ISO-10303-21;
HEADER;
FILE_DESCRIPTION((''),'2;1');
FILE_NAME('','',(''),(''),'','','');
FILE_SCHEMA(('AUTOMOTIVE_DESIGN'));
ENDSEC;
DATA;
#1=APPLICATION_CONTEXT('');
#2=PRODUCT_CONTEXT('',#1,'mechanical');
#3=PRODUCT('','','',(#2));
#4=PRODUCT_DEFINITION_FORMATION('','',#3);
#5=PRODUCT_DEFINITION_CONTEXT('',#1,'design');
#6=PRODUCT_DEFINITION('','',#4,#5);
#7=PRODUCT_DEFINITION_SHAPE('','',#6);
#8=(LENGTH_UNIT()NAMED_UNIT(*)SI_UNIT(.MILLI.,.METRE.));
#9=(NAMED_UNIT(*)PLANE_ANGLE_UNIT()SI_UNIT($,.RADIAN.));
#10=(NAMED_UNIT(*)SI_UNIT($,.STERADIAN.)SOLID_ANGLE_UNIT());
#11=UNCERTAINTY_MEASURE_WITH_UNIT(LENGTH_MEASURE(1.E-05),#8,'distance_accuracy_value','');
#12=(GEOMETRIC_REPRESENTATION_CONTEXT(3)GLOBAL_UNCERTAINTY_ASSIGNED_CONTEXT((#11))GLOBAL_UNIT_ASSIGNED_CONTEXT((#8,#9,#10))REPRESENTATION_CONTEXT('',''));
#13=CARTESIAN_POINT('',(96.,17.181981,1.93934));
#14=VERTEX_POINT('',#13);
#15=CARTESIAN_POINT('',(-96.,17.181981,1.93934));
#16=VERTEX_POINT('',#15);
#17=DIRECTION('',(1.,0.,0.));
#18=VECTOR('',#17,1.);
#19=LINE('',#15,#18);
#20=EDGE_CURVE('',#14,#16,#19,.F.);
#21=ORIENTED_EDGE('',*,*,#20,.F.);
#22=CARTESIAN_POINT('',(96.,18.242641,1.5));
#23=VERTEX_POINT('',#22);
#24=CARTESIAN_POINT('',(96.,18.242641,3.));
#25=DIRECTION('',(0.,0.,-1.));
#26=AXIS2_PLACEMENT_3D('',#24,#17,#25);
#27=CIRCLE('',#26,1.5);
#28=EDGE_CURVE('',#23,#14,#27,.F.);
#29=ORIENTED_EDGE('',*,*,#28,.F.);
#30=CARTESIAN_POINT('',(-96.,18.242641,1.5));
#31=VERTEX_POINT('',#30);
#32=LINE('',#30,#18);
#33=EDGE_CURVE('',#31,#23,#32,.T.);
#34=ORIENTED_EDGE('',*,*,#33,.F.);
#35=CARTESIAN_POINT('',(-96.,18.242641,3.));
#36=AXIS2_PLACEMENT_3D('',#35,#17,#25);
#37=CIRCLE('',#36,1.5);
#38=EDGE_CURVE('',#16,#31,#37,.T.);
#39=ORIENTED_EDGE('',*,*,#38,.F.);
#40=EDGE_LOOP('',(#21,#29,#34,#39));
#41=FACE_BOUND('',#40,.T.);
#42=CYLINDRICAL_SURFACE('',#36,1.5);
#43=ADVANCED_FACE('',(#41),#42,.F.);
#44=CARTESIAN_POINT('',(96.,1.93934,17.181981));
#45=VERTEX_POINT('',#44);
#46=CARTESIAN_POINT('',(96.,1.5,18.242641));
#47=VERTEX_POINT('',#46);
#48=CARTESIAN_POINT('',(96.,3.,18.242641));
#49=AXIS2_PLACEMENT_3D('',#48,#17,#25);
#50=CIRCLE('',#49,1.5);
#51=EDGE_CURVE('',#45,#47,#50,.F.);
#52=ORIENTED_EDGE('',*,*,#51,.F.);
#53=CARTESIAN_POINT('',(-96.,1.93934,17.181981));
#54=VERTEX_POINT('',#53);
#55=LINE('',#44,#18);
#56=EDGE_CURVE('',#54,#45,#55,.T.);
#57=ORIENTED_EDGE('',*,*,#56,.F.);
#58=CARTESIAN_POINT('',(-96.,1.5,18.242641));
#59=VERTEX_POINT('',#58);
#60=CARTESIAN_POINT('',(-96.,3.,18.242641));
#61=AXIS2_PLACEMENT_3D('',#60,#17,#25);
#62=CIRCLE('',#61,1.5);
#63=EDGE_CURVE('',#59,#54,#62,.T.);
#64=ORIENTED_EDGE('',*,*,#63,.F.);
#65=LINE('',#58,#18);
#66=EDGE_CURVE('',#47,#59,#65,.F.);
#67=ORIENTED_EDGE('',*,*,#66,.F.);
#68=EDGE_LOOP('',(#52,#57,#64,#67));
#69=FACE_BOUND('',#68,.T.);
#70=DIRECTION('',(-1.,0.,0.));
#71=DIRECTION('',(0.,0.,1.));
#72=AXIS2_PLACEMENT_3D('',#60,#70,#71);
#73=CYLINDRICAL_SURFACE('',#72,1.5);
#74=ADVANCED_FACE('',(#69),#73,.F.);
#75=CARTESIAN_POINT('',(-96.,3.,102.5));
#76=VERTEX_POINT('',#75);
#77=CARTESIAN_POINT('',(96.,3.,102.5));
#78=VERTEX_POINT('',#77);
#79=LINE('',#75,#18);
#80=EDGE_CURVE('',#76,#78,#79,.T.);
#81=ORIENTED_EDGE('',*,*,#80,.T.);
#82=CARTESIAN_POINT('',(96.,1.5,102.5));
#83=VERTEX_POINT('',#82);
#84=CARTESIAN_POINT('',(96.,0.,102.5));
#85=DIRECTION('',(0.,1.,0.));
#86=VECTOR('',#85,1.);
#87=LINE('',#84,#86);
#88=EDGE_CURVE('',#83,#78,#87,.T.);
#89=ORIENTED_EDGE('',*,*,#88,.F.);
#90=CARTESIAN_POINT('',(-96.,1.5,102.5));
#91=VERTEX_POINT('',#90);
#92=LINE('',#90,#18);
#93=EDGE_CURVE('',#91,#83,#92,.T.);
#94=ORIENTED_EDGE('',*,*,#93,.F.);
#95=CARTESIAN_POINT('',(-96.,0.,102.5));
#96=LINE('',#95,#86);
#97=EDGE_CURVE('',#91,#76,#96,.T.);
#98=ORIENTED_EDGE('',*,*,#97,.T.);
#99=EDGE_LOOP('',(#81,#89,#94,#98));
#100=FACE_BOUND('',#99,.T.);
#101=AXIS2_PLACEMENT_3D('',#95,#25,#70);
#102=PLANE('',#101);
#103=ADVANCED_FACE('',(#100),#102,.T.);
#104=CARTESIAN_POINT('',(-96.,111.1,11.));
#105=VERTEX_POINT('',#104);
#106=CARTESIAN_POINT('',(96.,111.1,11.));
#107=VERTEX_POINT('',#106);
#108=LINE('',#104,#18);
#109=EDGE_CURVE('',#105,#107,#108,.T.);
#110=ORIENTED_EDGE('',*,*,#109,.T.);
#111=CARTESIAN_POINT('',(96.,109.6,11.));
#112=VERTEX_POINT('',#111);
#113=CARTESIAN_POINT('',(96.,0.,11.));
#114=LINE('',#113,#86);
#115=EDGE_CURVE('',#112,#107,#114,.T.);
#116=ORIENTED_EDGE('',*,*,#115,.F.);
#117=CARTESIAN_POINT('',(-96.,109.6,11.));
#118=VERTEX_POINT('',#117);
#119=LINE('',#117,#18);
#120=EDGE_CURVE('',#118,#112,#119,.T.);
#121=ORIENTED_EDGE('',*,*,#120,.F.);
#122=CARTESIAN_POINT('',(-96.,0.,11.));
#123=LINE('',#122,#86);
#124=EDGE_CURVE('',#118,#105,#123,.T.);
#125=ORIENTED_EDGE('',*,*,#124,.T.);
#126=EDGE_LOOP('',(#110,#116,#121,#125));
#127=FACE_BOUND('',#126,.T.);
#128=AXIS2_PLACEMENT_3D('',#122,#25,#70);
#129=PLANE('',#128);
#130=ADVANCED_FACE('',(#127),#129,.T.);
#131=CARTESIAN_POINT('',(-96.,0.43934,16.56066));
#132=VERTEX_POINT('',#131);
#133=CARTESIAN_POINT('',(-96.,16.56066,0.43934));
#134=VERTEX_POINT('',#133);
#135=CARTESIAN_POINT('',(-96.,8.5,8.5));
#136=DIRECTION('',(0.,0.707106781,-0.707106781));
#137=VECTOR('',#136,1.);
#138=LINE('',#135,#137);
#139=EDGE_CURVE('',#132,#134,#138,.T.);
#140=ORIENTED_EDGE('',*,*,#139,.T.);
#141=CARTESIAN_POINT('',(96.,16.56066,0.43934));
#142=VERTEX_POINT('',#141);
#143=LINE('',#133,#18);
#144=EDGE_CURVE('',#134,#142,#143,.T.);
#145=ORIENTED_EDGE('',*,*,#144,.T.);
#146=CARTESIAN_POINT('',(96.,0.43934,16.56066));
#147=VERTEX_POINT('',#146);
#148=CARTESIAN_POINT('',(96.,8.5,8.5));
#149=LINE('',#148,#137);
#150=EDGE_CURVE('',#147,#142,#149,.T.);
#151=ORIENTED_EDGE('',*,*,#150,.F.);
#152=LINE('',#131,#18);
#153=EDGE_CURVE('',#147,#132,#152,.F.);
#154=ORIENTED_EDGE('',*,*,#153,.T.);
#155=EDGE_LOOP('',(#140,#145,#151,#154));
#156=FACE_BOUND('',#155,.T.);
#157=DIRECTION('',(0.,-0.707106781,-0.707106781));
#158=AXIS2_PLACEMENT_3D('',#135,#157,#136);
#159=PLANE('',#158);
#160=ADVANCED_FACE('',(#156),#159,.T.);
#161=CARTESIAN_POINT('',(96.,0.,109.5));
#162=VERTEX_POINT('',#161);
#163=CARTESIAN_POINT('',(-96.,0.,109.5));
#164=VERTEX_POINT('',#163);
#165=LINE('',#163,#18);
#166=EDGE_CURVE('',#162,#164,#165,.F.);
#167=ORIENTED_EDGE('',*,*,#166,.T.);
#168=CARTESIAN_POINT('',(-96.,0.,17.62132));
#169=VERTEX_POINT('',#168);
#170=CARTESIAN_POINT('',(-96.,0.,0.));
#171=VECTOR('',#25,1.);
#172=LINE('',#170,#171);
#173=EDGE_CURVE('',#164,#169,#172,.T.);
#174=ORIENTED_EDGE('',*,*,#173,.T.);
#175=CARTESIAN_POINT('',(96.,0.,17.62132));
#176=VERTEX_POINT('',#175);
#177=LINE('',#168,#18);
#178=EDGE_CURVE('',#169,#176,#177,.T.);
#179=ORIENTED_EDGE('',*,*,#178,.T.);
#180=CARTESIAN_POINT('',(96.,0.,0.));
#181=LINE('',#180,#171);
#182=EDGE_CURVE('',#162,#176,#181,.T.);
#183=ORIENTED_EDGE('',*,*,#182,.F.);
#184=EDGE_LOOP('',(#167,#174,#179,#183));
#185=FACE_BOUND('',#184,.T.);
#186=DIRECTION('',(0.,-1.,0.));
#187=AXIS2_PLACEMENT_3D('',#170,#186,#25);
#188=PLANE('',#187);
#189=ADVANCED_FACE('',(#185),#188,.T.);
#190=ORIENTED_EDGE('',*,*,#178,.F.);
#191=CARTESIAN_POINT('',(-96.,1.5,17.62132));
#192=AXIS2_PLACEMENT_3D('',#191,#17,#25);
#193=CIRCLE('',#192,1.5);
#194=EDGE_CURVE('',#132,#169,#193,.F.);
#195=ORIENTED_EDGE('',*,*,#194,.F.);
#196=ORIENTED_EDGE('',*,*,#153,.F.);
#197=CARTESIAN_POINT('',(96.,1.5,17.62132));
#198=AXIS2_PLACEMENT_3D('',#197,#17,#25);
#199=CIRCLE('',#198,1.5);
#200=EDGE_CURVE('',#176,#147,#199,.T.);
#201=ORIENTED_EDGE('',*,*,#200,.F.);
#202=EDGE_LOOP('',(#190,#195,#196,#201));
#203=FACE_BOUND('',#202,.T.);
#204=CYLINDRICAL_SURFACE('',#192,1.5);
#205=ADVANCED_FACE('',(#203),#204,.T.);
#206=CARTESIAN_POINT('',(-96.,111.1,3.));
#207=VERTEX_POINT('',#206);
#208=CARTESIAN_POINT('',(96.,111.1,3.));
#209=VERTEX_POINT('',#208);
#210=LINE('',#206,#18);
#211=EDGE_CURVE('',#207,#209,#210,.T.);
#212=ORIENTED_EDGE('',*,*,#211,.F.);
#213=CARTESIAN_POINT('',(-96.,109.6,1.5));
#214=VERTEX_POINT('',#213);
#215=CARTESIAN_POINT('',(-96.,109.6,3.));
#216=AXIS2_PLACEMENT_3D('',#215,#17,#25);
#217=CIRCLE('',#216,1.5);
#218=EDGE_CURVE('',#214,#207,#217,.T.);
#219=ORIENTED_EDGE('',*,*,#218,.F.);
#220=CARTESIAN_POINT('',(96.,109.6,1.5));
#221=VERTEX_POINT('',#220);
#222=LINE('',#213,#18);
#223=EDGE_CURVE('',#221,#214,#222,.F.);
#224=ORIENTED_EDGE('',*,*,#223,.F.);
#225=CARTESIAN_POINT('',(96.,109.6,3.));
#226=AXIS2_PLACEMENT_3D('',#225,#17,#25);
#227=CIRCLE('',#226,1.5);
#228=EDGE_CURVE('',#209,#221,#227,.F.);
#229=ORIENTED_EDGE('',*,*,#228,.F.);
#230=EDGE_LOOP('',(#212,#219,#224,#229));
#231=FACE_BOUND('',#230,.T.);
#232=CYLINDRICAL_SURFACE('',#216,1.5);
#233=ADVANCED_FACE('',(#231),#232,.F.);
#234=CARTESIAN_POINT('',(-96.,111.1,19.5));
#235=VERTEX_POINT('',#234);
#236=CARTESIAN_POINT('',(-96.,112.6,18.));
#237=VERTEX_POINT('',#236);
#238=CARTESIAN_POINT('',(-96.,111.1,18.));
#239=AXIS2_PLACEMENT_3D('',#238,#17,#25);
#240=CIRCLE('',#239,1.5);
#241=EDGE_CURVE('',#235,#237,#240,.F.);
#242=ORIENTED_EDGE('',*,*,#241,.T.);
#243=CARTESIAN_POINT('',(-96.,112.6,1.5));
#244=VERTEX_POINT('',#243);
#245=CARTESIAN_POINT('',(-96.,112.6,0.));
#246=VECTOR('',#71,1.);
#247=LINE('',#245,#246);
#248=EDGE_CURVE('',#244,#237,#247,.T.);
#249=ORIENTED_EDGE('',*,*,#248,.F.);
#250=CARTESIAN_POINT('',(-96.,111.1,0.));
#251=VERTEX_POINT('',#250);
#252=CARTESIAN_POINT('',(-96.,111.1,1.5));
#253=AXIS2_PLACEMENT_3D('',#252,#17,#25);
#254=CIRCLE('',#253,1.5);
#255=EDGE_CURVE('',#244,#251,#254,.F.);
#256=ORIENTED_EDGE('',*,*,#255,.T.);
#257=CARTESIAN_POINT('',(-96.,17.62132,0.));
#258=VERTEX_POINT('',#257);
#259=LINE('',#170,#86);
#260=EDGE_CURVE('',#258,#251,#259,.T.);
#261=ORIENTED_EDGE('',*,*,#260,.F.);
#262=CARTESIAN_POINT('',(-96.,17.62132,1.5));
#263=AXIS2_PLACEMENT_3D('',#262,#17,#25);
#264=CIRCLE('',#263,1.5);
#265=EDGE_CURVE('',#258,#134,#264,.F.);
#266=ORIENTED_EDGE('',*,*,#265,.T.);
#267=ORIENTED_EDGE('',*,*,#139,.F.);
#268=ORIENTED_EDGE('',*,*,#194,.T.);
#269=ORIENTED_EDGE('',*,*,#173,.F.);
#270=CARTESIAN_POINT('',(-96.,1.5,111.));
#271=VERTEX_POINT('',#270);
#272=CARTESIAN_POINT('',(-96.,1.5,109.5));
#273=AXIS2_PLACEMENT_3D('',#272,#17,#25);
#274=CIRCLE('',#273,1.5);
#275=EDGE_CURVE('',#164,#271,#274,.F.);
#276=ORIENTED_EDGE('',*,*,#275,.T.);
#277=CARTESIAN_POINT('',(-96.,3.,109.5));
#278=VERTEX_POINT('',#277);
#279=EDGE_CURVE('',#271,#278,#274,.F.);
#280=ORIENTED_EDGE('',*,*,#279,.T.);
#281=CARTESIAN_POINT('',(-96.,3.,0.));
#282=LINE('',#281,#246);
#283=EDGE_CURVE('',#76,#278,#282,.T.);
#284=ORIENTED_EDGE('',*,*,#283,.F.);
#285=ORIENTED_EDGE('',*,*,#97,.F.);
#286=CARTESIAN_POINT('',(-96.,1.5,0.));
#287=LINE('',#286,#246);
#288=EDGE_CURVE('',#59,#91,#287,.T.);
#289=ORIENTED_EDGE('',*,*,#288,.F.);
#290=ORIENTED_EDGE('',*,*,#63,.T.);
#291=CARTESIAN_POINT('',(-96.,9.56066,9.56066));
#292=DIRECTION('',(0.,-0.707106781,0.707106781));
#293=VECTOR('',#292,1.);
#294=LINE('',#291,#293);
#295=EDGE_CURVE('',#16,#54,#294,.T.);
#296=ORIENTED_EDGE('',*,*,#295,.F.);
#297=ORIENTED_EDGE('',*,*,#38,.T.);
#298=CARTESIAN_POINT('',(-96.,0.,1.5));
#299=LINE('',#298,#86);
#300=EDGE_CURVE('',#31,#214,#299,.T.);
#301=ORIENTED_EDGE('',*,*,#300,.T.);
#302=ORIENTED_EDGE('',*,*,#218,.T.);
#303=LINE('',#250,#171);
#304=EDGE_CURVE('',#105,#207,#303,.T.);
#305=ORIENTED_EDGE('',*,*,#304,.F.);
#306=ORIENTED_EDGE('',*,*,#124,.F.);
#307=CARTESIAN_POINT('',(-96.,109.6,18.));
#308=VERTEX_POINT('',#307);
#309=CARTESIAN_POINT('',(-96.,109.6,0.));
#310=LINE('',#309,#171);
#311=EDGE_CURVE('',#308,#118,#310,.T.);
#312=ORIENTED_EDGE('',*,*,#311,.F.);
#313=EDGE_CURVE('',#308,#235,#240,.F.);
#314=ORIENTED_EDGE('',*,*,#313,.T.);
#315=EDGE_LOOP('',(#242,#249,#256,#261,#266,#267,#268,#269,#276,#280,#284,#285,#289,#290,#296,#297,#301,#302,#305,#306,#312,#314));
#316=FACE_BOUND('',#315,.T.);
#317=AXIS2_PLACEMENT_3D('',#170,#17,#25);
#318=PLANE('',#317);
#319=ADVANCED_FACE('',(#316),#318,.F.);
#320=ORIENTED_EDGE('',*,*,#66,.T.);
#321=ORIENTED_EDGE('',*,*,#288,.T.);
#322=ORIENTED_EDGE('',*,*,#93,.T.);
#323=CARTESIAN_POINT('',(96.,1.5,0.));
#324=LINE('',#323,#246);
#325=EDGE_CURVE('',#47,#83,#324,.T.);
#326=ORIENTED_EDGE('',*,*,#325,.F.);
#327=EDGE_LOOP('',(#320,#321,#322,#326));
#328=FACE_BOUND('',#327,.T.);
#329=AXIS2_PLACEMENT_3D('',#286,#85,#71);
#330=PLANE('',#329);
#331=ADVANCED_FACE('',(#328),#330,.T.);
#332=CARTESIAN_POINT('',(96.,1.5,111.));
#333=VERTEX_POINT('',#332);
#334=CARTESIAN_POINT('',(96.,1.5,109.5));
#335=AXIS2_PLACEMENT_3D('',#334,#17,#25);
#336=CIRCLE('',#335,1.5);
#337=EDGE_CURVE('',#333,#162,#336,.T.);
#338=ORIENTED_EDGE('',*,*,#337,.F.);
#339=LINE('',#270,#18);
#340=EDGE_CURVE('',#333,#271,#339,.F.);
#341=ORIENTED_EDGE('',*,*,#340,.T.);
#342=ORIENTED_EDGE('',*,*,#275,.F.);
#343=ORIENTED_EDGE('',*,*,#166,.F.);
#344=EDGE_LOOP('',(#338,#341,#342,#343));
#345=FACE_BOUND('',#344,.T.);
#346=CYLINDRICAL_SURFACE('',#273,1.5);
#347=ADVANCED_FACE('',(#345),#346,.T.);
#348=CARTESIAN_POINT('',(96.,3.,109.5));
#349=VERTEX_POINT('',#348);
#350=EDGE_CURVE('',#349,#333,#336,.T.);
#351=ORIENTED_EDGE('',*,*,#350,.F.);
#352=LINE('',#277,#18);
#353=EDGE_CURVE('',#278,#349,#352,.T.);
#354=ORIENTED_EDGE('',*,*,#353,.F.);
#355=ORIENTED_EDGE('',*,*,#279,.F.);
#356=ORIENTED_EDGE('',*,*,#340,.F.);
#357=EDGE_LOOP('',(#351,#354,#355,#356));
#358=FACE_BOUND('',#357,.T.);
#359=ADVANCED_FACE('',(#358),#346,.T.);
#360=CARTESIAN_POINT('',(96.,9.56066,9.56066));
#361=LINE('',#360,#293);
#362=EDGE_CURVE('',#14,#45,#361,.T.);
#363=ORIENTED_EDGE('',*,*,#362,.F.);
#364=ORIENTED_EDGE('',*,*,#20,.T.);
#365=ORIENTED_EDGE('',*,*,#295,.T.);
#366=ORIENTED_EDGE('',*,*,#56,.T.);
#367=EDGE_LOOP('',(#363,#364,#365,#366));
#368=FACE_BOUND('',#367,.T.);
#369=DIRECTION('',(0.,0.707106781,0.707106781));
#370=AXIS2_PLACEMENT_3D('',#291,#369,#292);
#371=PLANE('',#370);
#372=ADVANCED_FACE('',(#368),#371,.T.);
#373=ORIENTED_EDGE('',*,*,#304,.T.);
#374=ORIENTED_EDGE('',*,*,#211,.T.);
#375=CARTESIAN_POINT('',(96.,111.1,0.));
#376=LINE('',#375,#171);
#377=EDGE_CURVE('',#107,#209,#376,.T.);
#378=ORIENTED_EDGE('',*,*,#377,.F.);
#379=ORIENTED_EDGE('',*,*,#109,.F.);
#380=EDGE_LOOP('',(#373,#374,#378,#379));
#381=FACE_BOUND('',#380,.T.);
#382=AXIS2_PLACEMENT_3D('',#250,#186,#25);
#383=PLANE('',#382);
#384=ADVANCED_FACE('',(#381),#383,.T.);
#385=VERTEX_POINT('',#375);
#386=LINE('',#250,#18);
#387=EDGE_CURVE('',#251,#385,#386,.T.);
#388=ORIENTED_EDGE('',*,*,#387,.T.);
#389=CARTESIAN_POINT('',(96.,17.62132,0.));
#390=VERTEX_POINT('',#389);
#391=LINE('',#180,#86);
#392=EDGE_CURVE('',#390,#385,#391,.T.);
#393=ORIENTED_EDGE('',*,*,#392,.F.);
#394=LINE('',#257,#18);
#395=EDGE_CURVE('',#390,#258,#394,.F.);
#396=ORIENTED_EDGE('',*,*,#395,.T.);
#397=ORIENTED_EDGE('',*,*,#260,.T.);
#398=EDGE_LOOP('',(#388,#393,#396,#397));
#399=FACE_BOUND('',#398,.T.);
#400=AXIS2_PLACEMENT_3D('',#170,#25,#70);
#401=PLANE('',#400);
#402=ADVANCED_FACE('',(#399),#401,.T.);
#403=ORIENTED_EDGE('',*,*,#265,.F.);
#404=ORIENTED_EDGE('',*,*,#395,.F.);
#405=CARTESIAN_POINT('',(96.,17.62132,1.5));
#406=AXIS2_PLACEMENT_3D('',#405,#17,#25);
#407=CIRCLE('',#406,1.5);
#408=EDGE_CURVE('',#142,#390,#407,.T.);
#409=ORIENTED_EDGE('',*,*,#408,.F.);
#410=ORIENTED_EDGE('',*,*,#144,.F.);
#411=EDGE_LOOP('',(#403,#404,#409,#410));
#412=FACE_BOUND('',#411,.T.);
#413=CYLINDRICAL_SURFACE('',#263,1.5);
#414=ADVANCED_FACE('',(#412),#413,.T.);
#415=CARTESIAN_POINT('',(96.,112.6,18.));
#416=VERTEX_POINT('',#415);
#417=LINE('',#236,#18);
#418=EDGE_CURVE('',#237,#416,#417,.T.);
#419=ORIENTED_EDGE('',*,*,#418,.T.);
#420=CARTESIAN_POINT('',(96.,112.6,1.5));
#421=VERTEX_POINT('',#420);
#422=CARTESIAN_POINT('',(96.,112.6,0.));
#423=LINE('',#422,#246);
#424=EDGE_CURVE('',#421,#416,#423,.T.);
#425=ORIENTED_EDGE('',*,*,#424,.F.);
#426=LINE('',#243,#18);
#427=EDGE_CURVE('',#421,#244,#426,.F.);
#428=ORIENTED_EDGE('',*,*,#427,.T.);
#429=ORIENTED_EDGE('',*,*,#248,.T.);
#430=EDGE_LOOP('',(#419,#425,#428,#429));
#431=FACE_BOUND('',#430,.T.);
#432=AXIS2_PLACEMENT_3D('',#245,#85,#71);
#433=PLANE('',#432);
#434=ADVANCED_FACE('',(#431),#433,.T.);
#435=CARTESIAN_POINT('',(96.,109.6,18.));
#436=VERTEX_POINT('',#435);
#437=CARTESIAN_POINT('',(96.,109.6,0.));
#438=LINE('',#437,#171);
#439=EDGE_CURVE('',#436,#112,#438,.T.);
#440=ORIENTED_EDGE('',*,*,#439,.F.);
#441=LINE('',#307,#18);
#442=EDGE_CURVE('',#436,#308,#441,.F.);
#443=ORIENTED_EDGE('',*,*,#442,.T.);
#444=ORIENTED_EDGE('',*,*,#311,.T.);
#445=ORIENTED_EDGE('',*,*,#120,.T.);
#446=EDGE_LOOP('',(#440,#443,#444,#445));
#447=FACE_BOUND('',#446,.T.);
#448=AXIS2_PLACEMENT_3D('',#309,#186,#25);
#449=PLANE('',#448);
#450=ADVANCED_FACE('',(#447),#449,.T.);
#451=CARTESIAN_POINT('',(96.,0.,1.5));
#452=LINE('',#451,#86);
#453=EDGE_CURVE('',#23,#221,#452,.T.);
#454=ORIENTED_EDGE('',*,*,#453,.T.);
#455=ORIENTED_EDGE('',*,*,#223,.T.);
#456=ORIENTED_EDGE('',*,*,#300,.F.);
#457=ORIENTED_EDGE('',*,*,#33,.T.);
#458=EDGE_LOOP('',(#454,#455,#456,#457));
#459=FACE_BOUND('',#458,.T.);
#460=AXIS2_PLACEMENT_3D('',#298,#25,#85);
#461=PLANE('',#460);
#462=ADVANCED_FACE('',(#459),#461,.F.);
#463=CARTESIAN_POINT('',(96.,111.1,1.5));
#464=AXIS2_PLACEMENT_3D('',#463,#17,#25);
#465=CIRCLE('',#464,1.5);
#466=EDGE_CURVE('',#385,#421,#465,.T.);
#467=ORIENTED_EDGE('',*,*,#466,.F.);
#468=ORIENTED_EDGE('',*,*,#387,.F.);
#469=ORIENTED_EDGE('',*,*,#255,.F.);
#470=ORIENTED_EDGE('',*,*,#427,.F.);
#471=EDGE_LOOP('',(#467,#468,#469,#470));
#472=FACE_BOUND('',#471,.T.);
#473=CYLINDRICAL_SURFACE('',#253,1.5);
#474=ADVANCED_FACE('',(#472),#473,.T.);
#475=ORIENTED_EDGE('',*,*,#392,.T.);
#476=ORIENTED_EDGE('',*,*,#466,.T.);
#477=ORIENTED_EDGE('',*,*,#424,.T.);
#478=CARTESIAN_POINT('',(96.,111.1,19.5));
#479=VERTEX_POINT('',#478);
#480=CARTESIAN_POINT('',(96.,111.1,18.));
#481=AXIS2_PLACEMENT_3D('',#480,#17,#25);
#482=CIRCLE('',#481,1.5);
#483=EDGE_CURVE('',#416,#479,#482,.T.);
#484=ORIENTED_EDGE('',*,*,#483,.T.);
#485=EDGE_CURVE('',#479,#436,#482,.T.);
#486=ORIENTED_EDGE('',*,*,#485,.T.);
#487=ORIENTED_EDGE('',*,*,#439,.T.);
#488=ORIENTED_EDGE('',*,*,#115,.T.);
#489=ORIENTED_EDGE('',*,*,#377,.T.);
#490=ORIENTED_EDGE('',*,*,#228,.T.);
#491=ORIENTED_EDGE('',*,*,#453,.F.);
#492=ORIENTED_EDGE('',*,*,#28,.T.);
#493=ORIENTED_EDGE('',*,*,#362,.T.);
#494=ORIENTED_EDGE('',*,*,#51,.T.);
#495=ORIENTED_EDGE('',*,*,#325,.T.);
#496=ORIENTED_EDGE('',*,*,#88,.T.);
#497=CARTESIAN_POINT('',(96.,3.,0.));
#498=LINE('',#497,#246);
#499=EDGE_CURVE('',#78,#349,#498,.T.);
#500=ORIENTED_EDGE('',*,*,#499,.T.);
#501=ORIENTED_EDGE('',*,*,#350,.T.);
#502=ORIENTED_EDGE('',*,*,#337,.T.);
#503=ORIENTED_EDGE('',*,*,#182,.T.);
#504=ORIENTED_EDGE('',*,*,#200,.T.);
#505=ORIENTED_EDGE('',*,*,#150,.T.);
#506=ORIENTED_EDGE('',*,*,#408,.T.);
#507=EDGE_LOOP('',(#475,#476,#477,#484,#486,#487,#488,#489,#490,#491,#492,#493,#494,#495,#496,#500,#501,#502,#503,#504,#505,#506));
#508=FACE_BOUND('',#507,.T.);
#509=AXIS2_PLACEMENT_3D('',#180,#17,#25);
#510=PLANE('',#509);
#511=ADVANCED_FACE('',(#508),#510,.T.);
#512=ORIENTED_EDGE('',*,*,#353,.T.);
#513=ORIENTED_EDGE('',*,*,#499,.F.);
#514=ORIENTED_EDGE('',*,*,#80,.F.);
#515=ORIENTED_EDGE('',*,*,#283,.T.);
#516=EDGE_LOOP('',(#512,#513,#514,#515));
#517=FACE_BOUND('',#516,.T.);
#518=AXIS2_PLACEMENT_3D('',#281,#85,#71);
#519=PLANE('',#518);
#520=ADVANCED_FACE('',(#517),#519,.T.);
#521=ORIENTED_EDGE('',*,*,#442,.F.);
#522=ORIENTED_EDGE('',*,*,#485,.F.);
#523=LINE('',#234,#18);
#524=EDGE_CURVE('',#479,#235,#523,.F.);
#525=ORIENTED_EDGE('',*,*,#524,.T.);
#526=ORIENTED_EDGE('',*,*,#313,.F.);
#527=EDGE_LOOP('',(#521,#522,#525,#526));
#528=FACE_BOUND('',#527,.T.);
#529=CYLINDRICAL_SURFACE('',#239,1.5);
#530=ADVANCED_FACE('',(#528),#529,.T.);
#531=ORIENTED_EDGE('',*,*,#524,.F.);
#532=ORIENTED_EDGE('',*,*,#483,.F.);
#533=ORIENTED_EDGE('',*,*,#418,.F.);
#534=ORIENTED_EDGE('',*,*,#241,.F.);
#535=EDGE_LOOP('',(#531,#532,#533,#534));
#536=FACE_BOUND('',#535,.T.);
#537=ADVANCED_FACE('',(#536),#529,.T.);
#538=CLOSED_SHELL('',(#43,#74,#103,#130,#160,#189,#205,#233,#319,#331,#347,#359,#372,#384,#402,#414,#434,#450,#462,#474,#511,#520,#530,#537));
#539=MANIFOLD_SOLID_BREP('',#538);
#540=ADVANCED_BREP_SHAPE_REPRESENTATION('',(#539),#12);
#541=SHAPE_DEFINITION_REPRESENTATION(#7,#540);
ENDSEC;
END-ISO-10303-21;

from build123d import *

# Parameters (mm, degrees)
EXTRUDE_1_DEPTH      = 96
EXTRUDE_1_DEPTH_BACK = 96
SKETCH_1_W           = 1.5
SKETCH_1_H           = 8.5
FILLET_1_R           = 1.5


with BuildPart() as part:
    # 草圖1 → 擠出1 (new, two sides: drawn at the far end of the back side and taken through both)
    with BuildSketch(Plane.YZ.offset(-EXTRUDE_1_DEPTH_BACK)):
        Polygon((1.5, 17), (1.5, 17.621320344), (0, 17), align=None)
        Polygon((17.621320344, 1.5), (17, 1.5), (17, 0), align=None)
        with Locations((2.25, 106.75)):
            Rectangle(SKETCH_1_W, SKETCH_1_H)
        with Locations((110.35, 15.25)):
            Rectangle(SKETCH_1_W, SKETCH_1_H)
        Polygon((111.1, 11), (111.1, 1.5), (112.6, 1.5), (112.6, 19.5), (111.1, 19.5), align=None)
        Polygon((17.621320344, 1.5), (17, 1.5), (17, 0), (0, 17), (1.5, 17), (1.5, 17.621320344), align=None)
        Polygon((0, 111), (0, 17), (1.5, 17.621320344), (1.5, 102.5), (1.5, 111), align=None)
        Polygon((17.621320344, 1.5), (17, 0), (112.6, 0), (112.6, 1.5), (111.1, 1.5), align=None)
    extrude(amount=EXTRUDE_1_DEPTH + EXTRUDE_1_DEPTH_BACK)

    # 圓角1
    fillet_1_edges = [part.edges().sort_by_distance(p)[0] for p in [
        (0, 0, 111),
        (0, 3, 111),
        (0, 1.5, 17.621320344),
        (0, 17, 0),
        (0, 0, 17),
        (0, 17.621320344, 1.5),
        (0, 111.1, 1.5),
        (0, 112.6, 0),
        (0, 109.6, 19.5),
        (0, 112.6, 19.5),
    ]]
    fillet(fillet_1_edges, radius=FILLET_1_R - 0.0001)  # a hair under: the kernel refuses the full size


solid = part.part
